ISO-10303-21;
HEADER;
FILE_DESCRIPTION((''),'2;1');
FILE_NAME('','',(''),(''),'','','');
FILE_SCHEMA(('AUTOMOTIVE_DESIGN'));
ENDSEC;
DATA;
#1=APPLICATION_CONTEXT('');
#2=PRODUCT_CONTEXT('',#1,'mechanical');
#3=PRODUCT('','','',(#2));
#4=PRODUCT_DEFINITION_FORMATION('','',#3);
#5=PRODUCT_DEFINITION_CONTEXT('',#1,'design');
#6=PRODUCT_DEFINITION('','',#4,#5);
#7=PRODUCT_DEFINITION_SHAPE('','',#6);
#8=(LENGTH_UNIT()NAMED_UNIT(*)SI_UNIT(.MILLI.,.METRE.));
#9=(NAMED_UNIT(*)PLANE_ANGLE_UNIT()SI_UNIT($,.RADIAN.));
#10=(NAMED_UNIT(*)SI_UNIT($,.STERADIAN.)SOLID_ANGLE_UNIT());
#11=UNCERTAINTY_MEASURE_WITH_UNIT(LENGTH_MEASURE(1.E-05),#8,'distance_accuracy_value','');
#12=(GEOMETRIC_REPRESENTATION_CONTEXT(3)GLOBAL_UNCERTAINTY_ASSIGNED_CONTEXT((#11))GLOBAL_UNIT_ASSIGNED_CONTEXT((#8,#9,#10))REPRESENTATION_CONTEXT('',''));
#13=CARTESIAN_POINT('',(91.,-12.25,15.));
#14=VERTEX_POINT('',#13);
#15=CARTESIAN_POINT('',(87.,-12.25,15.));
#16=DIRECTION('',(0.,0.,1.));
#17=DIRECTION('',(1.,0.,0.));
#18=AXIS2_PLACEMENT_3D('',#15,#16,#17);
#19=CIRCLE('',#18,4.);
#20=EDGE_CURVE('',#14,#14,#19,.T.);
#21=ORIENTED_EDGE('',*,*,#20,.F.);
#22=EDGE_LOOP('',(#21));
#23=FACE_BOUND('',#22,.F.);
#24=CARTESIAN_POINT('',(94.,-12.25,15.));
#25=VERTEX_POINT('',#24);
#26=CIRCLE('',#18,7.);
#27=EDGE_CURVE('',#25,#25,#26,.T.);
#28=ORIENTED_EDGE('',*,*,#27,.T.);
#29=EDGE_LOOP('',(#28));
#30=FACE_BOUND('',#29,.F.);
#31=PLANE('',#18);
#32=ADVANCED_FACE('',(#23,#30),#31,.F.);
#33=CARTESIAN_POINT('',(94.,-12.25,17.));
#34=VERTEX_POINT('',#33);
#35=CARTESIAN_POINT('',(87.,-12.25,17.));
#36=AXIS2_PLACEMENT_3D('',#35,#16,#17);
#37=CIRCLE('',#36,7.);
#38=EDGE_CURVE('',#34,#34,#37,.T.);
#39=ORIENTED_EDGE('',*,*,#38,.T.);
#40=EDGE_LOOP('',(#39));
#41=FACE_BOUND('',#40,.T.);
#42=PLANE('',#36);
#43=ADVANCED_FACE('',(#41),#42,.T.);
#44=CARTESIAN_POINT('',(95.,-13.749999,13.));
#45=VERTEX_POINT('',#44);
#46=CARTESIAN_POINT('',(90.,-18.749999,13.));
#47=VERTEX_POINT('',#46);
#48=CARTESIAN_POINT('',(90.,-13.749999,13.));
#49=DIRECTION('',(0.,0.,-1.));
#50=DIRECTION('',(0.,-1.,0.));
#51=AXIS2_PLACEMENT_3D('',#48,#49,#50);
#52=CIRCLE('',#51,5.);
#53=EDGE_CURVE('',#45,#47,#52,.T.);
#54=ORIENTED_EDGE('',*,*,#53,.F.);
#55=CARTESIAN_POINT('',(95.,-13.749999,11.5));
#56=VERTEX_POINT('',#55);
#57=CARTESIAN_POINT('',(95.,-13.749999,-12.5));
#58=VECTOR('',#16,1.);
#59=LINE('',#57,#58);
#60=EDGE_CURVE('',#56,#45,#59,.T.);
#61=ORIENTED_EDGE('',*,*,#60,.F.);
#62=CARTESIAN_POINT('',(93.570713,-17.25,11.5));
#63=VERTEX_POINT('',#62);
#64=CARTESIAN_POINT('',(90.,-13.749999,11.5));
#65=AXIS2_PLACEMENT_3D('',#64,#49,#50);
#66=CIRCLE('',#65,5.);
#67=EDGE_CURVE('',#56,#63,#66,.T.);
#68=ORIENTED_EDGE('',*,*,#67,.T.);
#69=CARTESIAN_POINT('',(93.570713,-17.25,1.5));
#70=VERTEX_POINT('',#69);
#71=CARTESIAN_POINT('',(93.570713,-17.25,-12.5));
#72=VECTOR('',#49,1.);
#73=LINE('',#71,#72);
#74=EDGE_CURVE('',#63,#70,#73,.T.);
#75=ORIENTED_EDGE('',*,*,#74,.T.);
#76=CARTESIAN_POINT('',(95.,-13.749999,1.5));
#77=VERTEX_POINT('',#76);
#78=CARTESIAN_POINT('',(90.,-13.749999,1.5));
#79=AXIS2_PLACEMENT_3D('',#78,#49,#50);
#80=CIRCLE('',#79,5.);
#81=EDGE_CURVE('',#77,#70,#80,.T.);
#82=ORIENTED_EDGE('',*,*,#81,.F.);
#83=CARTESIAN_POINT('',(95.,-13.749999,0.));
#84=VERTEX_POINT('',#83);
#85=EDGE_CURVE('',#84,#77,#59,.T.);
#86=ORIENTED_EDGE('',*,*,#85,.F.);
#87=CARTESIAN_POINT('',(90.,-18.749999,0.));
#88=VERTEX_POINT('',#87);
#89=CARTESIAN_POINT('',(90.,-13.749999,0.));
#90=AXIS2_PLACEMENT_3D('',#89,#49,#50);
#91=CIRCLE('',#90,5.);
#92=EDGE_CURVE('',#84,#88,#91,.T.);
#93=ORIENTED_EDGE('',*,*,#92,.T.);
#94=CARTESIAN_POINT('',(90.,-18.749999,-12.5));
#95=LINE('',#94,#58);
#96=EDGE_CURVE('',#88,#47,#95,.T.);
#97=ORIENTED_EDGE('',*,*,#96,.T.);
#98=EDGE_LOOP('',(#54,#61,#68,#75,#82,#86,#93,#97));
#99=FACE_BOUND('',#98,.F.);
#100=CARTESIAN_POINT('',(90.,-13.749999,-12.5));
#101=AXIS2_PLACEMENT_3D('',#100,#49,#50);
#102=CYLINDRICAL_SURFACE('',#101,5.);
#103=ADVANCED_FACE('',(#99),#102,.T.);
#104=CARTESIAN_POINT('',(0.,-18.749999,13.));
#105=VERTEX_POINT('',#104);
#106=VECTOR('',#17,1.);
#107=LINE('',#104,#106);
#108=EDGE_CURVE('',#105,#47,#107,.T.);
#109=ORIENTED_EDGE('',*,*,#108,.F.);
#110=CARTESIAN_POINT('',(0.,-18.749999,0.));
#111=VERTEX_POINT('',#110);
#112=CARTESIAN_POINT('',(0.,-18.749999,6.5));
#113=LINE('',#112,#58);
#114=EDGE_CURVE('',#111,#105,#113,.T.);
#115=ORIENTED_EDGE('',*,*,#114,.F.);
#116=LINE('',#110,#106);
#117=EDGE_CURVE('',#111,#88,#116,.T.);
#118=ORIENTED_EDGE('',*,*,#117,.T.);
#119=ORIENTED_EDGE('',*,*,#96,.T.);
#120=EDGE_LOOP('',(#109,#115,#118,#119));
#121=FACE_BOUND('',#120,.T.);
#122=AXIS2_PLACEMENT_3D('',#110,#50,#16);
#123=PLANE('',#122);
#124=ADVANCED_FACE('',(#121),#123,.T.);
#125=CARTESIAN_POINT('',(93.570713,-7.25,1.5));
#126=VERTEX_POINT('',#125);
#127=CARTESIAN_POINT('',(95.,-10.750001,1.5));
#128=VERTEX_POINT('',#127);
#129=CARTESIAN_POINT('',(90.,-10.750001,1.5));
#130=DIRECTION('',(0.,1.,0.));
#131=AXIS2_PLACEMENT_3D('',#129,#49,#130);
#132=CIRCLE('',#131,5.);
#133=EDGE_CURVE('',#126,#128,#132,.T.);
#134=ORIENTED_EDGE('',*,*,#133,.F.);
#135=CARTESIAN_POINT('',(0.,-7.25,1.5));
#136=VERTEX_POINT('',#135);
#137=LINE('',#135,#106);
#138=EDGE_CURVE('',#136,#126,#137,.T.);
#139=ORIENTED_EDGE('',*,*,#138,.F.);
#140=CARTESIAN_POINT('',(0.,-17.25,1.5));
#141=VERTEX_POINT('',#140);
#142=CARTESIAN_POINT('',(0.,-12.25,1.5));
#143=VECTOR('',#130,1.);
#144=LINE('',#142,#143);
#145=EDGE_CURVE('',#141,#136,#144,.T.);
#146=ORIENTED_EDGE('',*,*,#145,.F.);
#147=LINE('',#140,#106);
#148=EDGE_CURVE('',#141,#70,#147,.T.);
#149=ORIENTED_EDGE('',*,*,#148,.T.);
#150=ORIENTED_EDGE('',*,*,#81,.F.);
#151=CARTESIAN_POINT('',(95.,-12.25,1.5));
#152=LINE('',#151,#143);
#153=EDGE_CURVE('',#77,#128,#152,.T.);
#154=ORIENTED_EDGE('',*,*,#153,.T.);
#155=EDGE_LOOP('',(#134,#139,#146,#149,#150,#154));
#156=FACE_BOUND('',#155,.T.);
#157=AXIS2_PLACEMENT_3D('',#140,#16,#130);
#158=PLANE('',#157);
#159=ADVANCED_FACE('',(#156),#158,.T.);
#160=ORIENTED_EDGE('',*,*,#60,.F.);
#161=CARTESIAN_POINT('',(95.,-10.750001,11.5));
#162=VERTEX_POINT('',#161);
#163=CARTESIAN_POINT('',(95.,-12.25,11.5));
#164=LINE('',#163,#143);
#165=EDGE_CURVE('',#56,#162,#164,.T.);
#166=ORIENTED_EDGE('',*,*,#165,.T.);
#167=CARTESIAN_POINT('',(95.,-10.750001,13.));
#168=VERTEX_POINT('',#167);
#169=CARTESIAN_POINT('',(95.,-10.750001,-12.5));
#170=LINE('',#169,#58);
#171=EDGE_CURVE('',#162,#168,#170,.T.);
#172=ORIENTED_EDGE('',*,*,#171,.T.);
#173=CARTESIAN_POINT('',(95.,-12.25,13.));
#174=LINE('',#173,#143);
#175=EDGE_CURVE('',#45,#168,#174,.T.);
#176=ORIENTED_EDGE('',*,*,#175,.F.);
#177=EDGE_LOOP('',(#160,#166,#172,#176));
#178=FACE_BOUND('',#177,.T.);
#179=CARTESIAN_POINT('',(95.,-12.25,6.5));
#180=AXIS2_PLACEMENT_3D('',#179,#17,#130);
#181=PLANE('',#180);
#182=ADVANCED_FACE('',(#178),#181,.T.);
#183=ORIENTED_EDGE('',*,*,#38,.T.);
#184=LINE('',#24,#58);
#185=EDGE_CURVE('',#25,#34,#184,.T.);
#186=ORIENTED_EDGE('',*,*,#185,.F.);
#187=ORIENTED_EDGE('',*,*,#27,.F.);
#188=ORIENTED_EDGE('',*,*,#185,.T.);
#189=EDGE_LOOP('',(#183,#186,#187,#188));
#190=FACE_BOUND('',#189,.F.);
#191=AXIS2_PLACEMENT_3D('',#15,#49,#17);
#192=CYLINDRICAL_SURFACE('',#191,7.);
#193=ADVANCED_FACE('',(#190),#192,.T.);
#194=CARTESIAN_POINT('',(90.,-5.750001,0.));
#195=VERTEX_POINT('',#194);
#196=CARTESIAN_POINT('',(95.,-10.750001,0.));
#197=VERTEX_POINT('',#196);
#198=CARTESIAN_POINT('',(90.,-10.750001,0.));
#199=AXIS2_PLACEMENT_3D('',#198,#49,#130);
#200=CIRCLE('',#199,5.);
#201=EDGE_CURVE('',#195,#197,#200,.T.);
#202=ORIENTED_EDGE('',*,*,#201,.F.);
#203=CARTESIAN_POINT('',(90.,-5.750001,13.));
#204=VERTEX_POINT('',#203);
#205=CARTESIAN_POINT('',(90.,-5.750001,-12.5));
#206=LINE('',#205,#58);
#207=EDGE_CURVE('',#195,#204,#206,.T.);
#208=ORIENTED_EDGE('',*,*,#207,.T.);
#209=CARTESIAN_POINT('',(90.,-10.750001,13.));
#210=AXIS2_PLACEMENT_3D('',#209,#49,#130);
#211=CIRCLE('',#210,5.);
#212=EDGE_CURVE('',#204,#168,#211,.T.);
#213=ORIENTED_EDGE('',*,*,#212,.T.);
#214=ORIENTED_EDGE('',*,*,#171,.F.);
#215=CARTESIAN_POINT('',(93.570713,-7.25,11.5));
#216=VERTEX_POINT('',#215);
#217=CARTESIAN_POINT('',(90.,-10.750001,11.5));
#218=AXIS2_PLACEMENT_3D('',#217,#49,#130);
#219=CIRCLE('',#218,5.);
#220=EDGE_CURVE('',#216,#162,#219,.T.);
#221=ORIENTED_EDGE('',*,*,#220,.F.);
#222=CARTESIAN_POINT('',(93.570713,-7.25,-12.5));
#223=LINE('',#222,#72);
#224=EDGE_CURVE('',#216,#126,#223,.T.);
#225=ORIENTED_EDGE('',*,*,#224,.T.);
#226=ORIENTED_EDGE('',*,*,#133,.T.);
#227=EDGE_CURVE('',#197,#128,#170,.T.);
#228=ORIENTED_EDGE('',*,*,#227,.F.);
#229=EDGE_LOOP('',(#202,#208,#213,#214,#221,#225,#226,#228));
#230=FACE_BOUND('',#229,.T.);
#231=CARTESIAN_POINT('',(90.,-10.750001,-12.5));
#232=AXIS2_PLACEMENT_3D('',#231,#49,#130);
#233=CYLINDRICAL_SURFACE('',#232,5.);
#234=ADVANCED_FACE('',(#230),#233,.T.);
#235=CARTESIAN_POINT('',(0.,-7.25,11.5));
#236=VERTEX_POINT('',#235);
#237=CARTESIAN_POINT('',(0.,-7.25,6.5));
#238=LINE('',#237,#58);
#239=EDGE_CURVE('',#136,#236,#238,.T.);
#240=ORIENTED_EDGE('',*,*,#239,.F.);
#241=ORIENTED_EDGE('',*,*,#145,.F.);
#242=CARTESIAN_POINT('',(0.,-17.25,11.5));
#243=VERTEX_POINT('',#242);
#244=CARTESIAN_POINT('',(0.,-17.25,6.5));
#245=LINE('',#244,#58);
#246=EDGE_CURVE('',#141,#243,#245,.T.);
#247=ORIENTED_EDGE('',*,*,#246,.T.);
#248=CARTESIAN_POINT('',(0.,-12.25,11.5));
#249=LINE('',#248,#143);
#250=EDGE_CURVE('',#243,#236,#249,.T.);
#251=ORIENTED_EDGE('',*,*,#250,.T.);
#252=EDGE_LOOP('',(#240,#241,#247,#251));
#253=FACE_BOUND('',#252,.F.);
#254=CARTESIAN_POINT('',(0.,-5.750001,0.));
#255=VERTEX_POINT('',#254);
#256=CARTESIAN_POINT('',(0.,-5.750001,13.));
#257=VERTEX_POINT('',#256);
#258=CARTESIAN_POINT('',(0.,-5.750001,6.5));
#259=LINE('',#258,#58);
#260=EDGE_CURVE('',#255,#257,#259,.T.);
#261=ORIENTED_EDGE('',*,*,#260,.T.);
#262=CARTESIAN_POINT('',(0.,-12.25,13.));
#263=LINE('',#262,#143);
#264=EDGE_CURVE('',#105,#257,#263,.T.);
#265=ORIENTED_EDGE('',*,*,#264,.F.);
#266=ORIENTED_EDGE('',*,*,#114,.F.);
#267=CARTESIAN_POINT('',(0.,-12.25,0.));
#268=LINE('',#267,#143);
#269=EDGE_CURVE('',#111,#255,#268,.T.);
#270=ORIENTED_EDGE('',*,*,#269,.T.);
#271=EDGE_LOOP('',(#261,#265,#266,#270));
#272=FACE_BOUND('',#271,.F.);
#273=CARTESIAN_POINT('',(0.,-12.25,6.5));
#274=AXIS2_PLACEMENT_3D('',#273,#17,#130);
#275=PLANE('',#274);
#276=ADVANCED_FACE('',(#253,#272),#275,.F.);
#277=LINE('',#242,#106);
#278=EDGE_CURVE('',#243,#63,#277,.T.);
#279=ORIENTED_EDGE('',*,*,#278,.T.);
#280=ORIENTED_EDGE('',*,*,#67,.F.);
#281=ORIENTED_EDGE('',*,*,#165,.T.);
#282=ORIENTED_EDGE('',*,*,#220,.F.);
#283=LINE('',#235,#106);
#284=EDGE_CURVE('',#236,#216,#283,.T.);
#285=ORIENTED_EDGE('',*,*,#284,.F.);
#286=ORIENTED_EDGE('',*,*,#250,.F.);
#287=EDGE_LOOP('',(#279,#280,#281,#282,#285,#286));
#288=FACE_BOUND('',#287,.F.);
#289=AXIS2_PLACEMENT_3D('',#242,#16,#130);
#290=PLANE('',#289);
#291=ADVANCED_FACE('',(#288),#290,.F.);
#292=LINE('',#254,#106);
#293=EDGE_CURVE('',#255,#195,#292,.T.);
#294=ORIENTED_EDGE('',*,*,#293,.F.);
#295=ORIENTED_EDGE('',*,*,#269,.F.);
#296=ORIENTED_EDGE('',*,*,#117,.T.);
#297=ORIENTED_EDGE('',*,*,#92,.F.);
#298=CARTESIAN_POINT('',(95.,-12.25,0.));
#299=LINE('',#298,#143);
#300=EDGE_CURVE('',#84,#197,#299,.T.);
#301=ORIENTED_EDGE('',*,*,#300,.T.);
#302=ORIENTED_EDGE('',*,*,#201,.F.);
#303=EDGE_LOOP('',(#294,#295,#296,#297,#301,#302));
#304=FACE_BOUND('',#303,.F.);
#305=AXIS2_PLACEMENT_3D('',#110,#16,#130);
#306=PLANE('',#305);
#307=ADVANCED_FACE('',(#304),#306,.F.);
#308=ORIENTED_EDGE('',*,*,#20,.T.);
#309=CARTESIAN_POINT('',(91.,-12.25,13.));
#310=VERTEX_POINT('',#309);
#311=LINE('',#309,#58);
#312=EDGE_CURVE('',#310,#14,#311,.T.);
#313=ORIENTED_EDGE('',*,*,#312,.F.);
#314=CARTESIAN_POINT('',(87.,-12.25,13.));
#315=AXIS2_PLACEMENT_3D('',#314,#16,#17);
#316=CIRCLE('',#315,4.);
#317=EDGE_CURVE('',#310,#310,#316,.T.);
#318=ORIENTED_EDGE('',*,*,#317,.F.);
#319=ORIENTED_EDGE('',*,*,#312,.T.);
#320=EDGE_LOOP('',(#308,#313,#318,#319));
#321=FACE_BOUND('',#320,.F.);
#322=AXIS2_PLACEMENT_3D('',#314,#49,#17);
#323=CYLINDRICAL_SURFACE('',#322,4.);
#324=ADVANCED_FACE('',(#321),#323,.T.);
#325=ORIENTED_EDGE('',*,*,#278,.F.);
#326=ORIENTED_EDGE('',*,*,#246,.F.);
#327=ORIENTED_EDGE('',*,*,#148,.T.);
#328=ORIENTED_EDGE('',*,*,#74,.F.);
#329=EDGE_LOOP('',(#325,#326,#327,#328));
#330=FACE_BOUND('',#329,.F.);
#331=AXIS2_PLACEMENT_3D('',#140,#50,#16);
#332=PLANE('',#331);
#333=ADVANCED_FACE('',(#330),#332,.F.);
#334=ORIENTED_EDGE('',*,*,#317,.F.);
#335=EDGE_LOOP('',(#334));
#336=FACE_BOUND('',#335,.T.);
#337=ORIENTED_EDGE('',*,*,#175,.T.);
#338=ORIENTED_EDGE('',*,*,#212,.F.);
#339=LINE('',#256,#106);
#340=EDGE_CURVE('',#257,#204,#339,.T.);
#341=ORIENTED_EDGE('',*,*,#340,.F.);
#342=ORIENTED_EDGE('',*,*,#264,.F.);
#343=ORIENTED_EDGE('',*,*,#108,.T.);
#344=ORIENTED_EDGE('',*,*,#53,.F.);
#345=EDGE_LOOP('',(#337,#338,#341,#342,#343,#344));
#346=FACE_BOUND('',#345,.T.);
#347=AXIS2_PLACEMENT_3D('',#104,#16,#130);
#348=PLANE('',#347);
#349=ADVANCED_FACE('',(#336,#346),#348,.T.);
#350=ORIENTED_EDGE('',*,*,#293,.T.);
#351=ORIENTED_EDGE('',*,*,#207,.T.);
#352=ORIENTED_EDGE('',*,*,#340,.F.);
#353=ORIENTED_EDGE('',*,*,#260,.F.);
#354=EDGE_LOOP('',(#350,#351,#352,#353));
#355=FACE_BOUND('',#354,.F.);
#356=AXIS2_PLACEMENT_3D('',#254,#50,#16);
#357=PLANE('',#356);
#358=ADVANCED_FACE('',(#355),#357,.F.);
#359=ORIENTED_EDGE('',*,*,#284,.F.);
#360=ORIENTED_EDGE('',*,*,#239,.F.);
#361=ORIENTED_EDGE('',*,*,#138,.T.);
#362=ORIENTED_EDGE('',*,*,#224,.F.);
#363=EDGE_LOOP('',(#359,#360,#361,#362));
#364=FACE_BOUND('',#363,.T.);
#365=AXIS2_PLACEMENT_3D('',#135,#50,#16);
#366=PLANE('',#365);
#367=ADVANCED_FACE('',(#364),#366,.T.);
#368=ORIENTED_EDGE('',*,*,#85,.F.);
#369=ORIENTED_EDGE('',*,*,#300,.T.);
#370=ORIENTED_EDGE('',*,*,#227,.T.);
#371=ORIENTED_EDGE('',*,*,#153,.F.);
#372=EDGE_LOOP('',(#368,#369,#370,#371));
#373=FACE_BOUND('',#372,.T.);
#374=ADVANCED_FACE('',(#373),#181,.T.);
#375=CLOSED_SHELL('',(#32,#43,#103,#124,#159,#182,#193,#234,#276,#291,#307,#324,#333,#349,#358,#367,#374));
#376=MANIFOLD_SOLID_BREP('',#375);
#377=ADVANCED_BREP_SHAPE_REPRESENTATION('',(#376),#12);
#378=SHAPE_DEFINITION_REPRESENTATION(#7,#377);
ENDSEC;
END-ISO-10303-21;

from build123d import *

# Parameters (mm, degrees)
F0_W        = 12.9999973349
F0_H        = 13
F0_W_2      = 10
F0_H_2      = 10
F1_DEPTH    = 95
F2_T1_DEPTH = 38
F3_R        = 4
F4_DEPTH    = 2
F5_R        = 7
F5_R_2      = 4
F6_DEPTH    = 2


# Not quite as in the source:
# - a fillet or chamfer that OpenCascade refuses, or shapes differently, is made with other operations: its cross-section is extruded or revolved along the edge and cut away or added


with BuildPart() as f1:
    # F0 (on Right) → F1 (new body)
    with BuildSketch(Plane.YZ):
        with Locations((-12.2499999048, 6.5)):
            Rectangle(F0_W, F0_H)
        with Locations((-12.2499999048, 6.5)):
            Rectangle(F0_W_2, F0_H_2, mode=Mode.SUBTRACT)
    extrude(amount=F1_DEPTH)

    # F2: fillet of radius 5 on 2 edges, made by hand

    # F2_s2 → F2_t1 (cut)
    with BuildSketch(Plane.XY.offset(-12.5)):
        with BuildLine():
            ThreePointArc((90, -5.7500012374), (93.5355339059, -7.2144673315), (95, -10.7500012374))
            Line((95, -10.7500012374), (95, -5.7500012374))
            Line((95, -5.7500012374), (90, -5.7500012374))
        make_face()
        with BuildLine():
            ThreePointArc((90, -18.7499985722), (93.5355339059, -17.2855324782), (95, -13.7499985722))
            Line((95, -13.7499985722), (95, -18.7499985722))
            Line((95, -18.7499985722), (90, -18.7499985722))
        make_face()
    extrude(amount=F2_T1_DEPTH, mode=Mode.SUBTRACT)

    # F3 (on face) → F4 (join)
    with BuildSketch(Plane.XY.offset(13)):
        with Locations((87, -12.2499999048)):
            Circle(F3_R)
    extrude(amount=F4_DEPTH)

    # F5 (on face) → F6 (join)
    with BuildSketch(Plane.XY.offset(15)):
        with Locations((87, -12.2499999048)):
            Circle(F5_R)
        with Locations((87, -12.2499999048)):
            Circle(F5_R_2, mode=Mode.SUBTRACT)
        with Locations((87, -12.2499999048)):
            Circle(F5_R_2)
    extrude(amount=F6_DEPTH)


solid = f1.part
